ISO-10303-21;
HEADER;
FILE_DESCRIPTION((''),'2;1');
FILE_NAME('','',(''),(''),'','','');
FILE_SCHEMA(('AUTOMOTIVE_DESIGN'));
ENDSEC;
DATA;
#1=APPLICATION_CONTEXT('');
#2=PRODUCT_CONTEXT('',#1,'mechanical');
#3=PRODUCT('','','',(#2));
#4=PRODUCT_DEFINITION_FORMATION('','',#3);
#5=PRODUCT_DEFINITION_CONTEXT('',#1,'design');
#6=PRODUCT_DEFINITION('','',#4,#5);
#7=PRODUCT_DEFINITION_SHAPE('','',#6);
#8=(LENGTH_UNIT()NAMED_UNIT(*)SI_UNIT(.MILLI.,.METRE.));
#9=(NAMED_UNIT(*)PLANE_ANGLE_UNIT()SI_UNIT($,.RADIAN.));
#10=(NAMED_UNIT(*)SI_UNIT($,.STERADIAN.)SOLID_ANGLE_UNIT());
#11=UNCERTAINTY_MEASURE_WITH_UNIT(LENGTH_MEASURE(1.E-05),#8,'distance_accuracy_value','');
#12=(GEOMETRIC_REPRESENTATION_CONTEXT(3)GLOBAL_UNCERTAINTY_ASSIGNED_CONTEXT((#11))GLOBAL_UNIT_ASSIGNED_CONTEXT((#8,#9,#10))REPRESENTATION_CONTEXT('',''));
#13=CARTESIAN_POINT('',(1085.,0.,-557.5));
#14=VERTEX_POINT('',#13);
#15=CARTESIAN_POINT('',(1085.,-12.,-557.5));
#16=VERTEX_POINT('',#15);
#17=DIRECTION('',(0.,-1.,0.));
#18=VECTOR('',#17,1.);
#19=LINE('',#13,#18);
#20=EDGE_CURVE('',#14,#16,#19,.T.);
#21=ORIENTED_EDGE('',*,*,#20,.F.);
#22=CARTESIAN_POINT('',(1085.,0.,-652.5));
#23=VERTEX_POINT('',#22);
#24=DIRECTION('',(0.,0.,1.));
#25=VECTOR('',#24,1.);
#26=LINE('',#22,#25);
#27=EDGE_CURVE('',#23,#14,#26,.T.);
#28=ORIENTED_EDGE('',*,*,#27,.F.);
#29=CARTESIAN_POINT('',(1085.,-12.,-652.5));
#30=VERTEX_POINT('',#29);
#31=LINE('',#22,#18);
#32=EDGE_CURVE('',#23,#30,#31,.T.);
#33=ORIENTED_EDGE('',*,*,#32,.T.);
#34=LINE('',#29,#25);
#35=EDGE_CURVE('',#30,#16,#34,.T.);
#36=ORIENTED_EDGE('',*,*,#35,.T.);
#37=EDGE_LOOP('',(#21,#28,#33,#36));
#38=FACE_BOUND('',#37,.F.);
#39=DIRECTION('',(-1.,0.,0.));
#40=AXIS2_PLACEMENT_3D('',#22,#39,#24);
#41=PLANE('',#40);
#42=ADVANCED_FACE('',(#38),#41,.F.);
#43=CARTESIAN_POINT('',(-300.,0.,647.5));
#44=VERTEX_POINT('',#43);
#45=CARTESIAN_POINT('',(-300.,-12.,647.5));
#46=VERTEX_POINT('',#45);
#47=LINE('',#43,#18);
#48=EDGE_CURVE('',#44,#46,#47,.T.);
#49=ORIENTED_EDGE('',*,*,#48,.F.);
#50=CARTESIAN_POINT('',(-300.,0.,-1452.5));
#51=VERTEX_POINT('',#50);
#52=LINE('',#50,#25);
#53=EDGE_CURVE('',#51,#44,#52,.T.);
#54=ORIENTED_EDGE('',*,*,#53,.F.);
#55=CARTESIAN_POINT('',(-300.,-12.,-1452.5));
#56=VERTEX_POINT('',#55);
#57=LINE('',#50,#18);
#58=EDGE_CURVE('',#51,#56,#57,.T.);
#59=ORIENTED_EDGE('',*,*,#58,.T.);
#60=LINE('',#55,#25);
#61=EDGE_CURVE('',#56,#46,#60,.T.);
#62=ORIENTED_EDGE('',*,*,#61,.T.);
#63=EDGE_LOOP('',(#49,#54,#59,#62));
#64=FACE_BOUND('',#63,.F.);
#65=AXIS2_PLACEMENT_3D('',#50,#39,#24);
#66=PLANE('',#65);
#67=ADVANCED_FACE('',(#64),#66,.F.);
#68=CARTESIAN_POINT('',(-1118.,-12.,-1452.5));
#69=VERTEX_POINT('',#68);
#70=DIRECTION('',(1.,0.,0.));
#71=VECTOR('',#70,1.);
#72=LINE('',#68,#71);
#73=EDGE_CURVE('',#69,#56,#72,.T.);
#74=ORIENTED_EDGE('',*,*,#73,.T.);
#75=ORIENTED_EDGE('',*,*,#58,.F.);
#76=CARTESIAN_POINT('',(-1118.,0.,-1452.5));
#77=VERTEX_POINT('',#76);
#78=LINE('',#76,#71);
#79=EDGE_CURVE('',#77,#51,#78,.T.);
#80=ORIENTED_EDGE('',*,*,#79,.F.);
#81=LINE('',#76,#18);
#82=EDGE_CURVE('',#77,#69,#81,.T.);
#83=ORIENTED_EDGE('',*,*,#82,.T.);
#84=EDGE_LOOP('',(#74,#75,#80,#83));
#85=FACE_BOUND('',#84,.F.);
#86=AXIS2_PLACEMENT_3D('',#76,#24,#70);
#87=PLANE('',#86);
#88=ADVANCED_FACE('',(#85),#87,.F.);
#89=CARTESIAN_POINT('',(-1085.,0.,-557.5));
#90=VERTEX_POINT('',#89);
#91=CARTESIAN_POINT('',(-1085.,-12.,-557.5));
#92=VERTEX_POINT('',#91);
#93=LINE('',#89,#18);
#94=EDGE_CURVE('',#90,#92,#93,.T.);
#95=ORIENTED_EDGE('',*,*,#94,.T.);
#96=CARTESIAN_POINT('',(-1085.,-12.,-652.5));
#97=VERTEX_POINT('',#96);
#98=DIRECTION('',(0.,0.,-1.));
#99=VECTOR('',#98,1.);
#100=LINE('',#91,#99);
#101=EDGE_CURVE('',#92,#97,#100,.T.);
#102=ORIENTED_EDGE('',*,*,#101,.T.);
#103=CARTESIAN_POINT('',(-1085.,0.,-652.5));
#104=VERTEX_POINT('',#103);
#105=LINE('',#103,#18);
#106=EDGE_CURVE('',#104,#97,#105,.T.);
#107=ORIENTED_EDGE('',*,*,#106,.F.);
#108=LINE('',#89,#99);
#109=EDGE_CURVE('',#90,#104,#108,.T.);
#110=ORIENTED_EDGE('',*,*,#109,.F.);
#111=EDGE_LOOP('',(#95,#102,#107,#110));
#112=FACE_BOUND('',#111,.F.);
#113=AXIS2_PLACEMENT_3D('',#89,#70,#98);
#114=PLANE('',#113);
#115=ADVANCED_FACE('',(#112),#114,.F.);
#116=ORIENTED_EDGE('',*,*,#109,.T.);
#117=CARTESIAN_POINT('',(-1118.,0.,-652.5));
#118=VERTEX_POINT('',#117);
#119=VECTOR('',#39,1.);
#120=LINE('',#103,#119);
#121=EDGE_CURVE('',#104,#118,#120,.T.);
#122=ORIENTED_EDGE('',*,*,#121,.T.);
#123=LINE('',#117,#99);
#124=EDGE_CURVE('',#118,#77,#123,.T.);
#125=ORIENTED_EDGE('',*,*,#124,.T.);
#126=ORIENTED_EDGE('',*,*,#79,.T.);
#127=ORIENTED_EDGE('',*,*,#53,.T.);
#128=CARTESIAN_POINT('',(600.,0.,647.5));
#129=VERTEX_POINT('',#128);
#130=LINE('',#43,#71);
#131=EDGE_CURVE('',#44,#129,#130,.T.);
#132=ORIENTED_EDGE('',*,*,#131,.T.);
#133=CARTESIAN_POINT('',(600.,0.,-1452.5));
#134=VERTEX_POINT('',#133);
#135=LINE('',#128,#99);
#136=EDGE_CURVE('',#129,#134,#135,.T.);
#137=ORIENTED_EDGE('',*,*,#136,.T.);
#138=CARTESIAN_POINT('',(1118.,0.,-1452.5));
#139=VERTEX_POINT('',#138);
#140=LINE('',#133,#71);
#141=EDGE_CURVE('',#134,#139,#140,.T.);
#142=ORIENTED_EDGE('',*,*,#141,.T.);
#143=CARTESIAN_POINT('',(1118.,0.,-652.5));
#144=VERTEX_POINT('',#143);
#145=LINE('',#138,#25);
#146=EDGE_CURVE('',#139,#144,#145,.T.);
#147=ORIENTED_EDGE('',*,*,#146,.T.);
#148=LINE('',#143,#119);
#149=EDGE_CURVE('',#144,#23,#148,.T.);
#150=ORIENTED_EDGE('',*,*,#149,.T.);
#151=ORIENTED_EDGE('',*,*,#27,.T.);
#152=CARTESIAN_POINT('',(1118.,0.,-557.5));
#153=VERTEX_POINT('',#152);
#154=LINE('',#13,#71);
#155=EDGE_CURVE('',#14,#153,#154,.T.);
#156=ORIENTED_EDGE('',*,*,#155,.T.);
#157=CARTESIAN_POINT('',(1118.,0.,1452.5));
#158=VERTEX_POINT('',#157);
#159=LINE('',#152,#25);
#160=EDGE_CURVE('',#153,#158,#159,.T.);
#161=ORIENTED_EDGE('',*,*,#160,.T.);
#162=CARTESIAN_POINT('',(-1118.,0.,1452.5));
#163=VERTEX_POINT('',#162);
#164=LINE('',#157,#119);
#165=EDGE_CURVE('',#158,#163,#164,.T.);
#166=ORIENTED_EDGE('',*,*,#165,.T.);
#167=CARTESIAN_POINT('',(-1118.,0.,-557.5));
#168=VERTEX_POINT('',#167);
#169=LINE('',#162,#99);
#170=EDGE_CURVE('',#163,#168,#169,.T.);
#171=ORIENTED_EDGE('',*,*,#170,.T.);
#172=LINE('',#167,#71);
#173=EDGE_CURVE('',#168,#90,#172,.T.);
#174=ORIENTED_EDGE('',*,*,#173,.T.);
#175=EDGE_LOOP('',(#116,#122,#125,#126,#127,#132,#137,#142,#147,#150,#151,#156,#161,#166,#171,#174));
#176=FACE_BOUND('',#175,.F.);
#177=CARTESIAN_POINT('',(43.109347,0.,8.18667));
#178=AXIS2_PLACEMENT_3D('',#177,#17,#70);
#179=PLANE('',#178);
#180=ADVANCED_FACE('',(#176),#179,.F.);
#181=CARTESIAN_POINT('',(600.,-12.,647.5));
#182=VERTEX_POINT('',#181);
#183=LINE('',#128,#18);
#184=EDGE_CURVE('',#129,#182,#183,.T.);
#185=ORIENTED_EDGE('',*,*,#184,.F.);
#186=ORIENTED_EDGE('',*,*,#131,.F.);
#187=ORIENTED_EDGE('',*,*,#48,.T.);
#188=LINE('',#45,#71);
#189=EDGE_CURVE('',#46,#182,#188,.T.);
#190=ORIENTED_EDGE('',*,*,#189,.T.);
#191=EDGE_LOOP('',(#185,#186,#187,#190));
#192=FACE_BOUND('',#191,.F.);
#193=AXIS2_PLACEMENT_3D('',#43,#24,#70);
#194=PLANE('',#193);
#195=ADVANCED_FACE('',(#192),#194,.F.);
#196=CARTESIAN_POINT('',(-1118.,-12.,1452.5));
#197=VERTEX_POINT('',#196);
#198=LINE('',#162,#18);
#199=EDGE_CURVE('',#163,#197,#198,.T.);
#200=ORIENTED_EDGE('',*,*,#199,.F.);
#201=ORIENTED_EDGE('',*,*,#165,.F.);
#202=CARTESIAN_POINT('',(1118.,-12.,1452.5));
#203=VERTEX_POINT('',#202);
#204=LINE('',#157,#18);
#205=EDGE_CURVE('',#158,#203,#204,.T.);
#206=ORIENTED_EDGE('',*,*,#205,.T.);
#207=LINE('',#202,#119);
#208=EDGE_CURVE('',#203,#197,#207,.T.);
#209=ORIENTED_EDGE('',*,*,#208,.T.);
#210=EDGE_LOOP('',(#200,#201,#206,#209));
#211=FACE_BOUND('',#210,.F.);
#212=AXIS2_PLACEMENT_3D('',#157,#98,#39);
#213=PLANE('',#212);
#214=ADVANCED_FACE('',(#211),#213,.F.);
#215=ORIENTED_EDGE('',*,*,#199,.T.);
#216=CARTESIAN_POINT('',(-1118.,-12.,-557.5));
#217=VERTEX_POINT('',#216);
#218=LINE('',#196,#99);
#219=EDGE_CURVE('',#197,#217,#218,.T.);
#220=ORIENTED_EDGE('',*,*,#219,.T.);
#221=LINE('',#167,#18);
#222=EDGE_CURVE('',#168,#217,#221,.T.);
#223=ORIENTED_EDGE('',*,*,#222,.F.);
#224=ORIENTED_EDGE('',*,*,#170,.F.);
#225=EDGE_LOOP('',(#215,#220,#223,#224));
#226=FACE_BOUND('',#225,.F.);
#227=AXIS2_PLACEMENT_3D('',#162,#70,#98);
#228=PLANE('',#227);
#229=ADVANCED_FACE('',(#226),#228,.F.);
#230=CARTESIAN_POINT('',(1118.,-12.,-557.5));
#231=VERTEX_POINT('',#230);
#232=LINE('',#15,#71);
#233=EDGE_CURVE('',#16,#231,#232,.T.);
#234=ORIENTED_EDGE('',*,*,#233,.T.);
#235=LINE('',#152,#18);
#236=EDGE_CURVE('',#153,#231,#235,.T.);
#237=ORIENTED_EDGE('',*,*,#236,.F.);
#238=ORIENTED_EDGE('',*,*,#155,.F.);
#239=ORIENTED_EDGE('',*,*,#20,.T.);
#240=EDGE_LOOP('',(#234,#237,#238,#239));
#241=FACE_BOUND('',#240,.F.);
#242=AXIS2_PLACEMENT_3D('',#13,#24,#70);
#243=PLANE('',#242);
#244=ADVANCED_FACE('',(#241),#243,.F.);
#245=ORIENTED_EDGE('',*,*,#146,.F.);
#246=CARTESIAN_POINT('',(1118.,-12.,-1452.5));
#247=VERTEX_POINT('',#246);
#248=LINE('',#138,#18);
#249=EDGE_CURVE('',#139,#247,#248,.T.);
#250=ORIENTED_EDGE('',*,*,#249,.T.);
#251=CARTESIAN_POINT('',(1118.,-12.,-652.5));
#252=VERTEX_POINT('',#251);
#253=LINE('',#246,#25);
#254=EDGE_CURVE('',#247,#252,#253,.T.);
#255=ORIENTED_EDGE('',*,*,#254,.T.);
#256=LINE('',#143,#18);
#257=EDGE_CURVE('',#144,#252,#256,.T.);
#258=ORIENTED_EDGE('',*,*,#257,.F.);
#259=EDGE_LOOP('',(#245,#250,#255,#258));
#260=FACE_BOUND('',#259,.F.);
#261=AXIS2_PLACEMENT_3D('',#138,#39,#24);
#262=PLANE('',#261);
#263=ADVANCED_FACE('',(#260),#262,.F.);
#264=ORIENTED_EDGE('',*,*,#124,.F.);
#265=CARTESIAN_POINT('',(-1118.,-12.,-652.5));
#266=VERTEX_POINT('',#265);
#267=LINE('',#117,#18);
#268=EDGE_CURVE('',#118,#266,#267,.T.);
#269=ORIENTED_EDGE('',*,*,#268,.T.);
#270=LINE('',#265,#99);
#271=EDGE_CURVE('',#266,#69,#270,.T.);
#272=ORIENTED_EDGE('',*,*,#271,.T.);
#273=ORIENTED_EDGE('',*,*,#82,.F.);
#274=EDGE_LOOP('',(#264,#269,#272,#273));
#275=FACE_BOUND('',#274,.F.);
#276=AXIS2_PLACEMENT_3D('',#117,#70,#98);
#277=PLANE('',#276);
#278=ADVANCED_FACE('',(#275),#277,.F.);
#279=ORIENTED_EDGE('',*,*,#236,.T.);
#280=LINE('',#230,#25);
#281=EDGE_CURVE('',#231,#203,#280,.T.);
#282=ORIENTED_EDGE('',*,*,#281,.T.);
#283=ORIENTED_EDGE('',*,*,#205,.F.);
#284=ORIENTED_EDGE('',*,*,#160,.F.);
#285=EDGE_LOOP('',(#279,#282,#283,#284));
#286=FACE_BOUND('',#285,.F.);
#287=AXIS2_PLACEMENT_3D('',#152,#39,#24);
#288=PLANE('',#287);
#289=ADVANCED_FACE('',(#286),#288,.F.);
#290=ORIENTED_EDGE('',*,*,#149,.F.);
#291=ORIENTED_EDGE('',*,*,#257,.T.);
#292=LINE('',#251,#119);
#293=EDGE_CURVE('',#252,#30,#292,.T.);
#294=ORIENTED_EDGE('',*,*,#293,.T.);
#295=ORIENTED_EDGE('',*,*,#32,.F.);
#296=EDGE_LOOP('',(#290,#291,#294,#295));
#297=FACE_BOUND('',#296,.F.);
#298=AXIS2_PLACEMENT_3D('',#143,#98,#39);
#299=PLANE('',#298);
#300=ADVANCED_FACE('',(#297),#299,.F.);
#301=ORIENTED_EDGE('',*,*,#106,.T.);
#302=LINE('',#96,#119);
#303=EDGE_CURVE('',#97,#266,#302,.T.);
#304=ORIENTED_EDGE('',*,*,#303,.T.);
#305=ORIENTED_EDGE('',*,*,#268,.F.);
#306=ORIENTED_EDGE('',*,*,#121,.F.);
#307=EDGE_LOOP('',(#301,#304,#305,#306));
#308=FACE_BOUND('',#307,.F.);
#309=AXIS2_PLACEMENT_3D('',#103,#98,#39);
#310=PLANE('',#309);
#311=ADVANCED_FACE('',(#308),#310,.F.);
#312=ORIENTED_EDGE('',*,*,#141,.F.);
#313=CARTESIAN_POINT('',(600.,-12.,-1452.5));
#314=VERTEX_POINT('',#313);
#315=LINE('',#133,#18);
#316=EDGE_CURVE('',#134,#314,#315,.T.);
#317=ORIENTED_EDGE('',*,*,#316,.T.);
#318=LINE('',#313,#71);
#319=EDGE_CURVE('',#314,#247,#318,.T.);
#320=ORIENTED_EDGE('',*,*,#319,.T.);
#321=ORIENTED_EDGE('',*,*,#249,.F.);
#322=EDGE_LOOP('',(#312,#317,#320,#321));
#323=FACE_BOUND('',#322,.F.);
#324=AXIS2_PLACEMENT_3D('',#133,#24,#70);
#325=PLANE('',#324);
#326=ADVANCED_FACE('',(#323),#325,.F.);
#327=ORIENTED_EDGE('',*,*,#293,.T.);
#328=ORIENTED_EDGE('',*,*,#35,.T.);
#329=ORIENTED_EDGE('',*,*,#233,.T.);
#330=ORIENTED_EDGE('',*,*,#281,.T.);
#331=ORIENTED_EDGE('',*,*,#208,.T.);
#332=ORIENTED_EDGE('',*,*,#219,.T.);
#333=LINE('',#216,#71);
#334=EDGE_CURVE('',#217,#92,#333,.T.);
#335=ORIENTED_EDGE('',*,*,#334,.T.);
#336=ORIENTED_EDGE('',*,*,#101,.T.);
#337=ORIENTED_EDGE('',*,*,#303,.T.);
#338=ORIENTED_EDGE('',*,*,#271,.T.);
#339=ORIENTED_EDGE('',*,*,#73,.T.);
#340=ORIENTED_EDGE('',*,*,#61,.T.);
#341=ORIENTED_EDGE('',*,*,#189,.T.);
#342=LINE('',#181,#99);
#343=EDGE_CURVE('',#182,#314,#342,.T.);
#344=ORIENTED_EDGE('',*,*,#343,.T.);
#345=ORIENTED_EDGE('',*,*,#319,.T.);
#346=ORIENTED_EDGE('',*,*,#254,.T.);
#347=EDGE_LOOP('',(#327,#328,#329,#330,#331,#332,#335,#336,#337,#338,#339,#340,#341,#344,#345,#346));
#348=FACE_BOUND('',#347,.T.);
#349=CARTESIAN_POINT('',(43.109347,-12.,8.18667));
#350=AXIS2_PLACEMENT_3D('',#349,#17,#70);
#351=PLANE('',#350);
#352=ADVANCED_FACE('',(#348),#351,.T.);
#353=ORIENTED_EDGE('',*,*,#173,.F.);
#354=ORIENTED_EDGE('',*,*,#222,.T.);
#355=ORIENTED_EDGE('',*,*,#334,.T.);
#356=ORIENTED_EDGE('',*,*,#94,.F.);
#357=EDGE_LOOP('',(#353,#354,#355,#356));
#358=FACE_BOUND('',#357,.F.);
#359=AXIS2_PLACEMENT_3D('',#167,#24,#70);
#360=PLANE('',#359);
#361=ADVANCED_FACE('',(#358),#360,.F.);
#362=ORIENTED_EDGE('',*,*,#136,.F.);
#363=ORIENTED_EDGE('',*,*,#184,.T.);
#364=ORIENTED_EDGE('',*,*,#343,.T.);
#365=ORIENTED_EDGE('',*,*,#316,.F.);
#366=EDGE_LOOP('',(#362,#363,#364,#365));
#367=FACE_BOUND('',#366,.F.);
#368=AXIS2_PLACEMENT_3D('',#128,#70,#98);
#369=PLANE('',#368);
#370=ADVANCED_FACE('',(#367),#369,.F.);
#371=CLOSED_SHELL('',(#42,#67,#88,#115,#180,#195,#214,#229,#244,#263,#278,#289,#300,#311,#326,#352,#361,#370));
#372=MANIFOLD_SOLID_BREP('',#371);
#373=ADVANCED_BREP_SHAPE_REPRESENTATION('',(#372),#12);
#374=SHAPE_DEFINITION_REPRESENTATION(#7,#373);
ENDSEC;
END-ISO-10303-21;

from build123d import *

# Parameters (mm, degrees)
F1_DEPTH = 12


# Not quite as in the source:
# - a feature names something its author has since deleted; it is built from what else it names


with BuildPart() as f1:
    # F0 (on Front) → F1 (new body)
    with BuildSketch(Plane.XZ):
        Polygon((1118, -557.5), (1118, 1452.5), (-1118, 1452.5), (-1118, -557.5), (-1085, -557.5), (-1085, -652.5), (-1118, -652.5), (-1118, -1452.5), (-300, -1452.5), (-300, 647.5), (600, 647.5), (600, -1452.5), (1118, -1452.5), (1118, -652.5), (1085, -652.5), (1085, -557.5), align=None)
    extrude(amount=F1_DEPTH)


solid = f1.part
